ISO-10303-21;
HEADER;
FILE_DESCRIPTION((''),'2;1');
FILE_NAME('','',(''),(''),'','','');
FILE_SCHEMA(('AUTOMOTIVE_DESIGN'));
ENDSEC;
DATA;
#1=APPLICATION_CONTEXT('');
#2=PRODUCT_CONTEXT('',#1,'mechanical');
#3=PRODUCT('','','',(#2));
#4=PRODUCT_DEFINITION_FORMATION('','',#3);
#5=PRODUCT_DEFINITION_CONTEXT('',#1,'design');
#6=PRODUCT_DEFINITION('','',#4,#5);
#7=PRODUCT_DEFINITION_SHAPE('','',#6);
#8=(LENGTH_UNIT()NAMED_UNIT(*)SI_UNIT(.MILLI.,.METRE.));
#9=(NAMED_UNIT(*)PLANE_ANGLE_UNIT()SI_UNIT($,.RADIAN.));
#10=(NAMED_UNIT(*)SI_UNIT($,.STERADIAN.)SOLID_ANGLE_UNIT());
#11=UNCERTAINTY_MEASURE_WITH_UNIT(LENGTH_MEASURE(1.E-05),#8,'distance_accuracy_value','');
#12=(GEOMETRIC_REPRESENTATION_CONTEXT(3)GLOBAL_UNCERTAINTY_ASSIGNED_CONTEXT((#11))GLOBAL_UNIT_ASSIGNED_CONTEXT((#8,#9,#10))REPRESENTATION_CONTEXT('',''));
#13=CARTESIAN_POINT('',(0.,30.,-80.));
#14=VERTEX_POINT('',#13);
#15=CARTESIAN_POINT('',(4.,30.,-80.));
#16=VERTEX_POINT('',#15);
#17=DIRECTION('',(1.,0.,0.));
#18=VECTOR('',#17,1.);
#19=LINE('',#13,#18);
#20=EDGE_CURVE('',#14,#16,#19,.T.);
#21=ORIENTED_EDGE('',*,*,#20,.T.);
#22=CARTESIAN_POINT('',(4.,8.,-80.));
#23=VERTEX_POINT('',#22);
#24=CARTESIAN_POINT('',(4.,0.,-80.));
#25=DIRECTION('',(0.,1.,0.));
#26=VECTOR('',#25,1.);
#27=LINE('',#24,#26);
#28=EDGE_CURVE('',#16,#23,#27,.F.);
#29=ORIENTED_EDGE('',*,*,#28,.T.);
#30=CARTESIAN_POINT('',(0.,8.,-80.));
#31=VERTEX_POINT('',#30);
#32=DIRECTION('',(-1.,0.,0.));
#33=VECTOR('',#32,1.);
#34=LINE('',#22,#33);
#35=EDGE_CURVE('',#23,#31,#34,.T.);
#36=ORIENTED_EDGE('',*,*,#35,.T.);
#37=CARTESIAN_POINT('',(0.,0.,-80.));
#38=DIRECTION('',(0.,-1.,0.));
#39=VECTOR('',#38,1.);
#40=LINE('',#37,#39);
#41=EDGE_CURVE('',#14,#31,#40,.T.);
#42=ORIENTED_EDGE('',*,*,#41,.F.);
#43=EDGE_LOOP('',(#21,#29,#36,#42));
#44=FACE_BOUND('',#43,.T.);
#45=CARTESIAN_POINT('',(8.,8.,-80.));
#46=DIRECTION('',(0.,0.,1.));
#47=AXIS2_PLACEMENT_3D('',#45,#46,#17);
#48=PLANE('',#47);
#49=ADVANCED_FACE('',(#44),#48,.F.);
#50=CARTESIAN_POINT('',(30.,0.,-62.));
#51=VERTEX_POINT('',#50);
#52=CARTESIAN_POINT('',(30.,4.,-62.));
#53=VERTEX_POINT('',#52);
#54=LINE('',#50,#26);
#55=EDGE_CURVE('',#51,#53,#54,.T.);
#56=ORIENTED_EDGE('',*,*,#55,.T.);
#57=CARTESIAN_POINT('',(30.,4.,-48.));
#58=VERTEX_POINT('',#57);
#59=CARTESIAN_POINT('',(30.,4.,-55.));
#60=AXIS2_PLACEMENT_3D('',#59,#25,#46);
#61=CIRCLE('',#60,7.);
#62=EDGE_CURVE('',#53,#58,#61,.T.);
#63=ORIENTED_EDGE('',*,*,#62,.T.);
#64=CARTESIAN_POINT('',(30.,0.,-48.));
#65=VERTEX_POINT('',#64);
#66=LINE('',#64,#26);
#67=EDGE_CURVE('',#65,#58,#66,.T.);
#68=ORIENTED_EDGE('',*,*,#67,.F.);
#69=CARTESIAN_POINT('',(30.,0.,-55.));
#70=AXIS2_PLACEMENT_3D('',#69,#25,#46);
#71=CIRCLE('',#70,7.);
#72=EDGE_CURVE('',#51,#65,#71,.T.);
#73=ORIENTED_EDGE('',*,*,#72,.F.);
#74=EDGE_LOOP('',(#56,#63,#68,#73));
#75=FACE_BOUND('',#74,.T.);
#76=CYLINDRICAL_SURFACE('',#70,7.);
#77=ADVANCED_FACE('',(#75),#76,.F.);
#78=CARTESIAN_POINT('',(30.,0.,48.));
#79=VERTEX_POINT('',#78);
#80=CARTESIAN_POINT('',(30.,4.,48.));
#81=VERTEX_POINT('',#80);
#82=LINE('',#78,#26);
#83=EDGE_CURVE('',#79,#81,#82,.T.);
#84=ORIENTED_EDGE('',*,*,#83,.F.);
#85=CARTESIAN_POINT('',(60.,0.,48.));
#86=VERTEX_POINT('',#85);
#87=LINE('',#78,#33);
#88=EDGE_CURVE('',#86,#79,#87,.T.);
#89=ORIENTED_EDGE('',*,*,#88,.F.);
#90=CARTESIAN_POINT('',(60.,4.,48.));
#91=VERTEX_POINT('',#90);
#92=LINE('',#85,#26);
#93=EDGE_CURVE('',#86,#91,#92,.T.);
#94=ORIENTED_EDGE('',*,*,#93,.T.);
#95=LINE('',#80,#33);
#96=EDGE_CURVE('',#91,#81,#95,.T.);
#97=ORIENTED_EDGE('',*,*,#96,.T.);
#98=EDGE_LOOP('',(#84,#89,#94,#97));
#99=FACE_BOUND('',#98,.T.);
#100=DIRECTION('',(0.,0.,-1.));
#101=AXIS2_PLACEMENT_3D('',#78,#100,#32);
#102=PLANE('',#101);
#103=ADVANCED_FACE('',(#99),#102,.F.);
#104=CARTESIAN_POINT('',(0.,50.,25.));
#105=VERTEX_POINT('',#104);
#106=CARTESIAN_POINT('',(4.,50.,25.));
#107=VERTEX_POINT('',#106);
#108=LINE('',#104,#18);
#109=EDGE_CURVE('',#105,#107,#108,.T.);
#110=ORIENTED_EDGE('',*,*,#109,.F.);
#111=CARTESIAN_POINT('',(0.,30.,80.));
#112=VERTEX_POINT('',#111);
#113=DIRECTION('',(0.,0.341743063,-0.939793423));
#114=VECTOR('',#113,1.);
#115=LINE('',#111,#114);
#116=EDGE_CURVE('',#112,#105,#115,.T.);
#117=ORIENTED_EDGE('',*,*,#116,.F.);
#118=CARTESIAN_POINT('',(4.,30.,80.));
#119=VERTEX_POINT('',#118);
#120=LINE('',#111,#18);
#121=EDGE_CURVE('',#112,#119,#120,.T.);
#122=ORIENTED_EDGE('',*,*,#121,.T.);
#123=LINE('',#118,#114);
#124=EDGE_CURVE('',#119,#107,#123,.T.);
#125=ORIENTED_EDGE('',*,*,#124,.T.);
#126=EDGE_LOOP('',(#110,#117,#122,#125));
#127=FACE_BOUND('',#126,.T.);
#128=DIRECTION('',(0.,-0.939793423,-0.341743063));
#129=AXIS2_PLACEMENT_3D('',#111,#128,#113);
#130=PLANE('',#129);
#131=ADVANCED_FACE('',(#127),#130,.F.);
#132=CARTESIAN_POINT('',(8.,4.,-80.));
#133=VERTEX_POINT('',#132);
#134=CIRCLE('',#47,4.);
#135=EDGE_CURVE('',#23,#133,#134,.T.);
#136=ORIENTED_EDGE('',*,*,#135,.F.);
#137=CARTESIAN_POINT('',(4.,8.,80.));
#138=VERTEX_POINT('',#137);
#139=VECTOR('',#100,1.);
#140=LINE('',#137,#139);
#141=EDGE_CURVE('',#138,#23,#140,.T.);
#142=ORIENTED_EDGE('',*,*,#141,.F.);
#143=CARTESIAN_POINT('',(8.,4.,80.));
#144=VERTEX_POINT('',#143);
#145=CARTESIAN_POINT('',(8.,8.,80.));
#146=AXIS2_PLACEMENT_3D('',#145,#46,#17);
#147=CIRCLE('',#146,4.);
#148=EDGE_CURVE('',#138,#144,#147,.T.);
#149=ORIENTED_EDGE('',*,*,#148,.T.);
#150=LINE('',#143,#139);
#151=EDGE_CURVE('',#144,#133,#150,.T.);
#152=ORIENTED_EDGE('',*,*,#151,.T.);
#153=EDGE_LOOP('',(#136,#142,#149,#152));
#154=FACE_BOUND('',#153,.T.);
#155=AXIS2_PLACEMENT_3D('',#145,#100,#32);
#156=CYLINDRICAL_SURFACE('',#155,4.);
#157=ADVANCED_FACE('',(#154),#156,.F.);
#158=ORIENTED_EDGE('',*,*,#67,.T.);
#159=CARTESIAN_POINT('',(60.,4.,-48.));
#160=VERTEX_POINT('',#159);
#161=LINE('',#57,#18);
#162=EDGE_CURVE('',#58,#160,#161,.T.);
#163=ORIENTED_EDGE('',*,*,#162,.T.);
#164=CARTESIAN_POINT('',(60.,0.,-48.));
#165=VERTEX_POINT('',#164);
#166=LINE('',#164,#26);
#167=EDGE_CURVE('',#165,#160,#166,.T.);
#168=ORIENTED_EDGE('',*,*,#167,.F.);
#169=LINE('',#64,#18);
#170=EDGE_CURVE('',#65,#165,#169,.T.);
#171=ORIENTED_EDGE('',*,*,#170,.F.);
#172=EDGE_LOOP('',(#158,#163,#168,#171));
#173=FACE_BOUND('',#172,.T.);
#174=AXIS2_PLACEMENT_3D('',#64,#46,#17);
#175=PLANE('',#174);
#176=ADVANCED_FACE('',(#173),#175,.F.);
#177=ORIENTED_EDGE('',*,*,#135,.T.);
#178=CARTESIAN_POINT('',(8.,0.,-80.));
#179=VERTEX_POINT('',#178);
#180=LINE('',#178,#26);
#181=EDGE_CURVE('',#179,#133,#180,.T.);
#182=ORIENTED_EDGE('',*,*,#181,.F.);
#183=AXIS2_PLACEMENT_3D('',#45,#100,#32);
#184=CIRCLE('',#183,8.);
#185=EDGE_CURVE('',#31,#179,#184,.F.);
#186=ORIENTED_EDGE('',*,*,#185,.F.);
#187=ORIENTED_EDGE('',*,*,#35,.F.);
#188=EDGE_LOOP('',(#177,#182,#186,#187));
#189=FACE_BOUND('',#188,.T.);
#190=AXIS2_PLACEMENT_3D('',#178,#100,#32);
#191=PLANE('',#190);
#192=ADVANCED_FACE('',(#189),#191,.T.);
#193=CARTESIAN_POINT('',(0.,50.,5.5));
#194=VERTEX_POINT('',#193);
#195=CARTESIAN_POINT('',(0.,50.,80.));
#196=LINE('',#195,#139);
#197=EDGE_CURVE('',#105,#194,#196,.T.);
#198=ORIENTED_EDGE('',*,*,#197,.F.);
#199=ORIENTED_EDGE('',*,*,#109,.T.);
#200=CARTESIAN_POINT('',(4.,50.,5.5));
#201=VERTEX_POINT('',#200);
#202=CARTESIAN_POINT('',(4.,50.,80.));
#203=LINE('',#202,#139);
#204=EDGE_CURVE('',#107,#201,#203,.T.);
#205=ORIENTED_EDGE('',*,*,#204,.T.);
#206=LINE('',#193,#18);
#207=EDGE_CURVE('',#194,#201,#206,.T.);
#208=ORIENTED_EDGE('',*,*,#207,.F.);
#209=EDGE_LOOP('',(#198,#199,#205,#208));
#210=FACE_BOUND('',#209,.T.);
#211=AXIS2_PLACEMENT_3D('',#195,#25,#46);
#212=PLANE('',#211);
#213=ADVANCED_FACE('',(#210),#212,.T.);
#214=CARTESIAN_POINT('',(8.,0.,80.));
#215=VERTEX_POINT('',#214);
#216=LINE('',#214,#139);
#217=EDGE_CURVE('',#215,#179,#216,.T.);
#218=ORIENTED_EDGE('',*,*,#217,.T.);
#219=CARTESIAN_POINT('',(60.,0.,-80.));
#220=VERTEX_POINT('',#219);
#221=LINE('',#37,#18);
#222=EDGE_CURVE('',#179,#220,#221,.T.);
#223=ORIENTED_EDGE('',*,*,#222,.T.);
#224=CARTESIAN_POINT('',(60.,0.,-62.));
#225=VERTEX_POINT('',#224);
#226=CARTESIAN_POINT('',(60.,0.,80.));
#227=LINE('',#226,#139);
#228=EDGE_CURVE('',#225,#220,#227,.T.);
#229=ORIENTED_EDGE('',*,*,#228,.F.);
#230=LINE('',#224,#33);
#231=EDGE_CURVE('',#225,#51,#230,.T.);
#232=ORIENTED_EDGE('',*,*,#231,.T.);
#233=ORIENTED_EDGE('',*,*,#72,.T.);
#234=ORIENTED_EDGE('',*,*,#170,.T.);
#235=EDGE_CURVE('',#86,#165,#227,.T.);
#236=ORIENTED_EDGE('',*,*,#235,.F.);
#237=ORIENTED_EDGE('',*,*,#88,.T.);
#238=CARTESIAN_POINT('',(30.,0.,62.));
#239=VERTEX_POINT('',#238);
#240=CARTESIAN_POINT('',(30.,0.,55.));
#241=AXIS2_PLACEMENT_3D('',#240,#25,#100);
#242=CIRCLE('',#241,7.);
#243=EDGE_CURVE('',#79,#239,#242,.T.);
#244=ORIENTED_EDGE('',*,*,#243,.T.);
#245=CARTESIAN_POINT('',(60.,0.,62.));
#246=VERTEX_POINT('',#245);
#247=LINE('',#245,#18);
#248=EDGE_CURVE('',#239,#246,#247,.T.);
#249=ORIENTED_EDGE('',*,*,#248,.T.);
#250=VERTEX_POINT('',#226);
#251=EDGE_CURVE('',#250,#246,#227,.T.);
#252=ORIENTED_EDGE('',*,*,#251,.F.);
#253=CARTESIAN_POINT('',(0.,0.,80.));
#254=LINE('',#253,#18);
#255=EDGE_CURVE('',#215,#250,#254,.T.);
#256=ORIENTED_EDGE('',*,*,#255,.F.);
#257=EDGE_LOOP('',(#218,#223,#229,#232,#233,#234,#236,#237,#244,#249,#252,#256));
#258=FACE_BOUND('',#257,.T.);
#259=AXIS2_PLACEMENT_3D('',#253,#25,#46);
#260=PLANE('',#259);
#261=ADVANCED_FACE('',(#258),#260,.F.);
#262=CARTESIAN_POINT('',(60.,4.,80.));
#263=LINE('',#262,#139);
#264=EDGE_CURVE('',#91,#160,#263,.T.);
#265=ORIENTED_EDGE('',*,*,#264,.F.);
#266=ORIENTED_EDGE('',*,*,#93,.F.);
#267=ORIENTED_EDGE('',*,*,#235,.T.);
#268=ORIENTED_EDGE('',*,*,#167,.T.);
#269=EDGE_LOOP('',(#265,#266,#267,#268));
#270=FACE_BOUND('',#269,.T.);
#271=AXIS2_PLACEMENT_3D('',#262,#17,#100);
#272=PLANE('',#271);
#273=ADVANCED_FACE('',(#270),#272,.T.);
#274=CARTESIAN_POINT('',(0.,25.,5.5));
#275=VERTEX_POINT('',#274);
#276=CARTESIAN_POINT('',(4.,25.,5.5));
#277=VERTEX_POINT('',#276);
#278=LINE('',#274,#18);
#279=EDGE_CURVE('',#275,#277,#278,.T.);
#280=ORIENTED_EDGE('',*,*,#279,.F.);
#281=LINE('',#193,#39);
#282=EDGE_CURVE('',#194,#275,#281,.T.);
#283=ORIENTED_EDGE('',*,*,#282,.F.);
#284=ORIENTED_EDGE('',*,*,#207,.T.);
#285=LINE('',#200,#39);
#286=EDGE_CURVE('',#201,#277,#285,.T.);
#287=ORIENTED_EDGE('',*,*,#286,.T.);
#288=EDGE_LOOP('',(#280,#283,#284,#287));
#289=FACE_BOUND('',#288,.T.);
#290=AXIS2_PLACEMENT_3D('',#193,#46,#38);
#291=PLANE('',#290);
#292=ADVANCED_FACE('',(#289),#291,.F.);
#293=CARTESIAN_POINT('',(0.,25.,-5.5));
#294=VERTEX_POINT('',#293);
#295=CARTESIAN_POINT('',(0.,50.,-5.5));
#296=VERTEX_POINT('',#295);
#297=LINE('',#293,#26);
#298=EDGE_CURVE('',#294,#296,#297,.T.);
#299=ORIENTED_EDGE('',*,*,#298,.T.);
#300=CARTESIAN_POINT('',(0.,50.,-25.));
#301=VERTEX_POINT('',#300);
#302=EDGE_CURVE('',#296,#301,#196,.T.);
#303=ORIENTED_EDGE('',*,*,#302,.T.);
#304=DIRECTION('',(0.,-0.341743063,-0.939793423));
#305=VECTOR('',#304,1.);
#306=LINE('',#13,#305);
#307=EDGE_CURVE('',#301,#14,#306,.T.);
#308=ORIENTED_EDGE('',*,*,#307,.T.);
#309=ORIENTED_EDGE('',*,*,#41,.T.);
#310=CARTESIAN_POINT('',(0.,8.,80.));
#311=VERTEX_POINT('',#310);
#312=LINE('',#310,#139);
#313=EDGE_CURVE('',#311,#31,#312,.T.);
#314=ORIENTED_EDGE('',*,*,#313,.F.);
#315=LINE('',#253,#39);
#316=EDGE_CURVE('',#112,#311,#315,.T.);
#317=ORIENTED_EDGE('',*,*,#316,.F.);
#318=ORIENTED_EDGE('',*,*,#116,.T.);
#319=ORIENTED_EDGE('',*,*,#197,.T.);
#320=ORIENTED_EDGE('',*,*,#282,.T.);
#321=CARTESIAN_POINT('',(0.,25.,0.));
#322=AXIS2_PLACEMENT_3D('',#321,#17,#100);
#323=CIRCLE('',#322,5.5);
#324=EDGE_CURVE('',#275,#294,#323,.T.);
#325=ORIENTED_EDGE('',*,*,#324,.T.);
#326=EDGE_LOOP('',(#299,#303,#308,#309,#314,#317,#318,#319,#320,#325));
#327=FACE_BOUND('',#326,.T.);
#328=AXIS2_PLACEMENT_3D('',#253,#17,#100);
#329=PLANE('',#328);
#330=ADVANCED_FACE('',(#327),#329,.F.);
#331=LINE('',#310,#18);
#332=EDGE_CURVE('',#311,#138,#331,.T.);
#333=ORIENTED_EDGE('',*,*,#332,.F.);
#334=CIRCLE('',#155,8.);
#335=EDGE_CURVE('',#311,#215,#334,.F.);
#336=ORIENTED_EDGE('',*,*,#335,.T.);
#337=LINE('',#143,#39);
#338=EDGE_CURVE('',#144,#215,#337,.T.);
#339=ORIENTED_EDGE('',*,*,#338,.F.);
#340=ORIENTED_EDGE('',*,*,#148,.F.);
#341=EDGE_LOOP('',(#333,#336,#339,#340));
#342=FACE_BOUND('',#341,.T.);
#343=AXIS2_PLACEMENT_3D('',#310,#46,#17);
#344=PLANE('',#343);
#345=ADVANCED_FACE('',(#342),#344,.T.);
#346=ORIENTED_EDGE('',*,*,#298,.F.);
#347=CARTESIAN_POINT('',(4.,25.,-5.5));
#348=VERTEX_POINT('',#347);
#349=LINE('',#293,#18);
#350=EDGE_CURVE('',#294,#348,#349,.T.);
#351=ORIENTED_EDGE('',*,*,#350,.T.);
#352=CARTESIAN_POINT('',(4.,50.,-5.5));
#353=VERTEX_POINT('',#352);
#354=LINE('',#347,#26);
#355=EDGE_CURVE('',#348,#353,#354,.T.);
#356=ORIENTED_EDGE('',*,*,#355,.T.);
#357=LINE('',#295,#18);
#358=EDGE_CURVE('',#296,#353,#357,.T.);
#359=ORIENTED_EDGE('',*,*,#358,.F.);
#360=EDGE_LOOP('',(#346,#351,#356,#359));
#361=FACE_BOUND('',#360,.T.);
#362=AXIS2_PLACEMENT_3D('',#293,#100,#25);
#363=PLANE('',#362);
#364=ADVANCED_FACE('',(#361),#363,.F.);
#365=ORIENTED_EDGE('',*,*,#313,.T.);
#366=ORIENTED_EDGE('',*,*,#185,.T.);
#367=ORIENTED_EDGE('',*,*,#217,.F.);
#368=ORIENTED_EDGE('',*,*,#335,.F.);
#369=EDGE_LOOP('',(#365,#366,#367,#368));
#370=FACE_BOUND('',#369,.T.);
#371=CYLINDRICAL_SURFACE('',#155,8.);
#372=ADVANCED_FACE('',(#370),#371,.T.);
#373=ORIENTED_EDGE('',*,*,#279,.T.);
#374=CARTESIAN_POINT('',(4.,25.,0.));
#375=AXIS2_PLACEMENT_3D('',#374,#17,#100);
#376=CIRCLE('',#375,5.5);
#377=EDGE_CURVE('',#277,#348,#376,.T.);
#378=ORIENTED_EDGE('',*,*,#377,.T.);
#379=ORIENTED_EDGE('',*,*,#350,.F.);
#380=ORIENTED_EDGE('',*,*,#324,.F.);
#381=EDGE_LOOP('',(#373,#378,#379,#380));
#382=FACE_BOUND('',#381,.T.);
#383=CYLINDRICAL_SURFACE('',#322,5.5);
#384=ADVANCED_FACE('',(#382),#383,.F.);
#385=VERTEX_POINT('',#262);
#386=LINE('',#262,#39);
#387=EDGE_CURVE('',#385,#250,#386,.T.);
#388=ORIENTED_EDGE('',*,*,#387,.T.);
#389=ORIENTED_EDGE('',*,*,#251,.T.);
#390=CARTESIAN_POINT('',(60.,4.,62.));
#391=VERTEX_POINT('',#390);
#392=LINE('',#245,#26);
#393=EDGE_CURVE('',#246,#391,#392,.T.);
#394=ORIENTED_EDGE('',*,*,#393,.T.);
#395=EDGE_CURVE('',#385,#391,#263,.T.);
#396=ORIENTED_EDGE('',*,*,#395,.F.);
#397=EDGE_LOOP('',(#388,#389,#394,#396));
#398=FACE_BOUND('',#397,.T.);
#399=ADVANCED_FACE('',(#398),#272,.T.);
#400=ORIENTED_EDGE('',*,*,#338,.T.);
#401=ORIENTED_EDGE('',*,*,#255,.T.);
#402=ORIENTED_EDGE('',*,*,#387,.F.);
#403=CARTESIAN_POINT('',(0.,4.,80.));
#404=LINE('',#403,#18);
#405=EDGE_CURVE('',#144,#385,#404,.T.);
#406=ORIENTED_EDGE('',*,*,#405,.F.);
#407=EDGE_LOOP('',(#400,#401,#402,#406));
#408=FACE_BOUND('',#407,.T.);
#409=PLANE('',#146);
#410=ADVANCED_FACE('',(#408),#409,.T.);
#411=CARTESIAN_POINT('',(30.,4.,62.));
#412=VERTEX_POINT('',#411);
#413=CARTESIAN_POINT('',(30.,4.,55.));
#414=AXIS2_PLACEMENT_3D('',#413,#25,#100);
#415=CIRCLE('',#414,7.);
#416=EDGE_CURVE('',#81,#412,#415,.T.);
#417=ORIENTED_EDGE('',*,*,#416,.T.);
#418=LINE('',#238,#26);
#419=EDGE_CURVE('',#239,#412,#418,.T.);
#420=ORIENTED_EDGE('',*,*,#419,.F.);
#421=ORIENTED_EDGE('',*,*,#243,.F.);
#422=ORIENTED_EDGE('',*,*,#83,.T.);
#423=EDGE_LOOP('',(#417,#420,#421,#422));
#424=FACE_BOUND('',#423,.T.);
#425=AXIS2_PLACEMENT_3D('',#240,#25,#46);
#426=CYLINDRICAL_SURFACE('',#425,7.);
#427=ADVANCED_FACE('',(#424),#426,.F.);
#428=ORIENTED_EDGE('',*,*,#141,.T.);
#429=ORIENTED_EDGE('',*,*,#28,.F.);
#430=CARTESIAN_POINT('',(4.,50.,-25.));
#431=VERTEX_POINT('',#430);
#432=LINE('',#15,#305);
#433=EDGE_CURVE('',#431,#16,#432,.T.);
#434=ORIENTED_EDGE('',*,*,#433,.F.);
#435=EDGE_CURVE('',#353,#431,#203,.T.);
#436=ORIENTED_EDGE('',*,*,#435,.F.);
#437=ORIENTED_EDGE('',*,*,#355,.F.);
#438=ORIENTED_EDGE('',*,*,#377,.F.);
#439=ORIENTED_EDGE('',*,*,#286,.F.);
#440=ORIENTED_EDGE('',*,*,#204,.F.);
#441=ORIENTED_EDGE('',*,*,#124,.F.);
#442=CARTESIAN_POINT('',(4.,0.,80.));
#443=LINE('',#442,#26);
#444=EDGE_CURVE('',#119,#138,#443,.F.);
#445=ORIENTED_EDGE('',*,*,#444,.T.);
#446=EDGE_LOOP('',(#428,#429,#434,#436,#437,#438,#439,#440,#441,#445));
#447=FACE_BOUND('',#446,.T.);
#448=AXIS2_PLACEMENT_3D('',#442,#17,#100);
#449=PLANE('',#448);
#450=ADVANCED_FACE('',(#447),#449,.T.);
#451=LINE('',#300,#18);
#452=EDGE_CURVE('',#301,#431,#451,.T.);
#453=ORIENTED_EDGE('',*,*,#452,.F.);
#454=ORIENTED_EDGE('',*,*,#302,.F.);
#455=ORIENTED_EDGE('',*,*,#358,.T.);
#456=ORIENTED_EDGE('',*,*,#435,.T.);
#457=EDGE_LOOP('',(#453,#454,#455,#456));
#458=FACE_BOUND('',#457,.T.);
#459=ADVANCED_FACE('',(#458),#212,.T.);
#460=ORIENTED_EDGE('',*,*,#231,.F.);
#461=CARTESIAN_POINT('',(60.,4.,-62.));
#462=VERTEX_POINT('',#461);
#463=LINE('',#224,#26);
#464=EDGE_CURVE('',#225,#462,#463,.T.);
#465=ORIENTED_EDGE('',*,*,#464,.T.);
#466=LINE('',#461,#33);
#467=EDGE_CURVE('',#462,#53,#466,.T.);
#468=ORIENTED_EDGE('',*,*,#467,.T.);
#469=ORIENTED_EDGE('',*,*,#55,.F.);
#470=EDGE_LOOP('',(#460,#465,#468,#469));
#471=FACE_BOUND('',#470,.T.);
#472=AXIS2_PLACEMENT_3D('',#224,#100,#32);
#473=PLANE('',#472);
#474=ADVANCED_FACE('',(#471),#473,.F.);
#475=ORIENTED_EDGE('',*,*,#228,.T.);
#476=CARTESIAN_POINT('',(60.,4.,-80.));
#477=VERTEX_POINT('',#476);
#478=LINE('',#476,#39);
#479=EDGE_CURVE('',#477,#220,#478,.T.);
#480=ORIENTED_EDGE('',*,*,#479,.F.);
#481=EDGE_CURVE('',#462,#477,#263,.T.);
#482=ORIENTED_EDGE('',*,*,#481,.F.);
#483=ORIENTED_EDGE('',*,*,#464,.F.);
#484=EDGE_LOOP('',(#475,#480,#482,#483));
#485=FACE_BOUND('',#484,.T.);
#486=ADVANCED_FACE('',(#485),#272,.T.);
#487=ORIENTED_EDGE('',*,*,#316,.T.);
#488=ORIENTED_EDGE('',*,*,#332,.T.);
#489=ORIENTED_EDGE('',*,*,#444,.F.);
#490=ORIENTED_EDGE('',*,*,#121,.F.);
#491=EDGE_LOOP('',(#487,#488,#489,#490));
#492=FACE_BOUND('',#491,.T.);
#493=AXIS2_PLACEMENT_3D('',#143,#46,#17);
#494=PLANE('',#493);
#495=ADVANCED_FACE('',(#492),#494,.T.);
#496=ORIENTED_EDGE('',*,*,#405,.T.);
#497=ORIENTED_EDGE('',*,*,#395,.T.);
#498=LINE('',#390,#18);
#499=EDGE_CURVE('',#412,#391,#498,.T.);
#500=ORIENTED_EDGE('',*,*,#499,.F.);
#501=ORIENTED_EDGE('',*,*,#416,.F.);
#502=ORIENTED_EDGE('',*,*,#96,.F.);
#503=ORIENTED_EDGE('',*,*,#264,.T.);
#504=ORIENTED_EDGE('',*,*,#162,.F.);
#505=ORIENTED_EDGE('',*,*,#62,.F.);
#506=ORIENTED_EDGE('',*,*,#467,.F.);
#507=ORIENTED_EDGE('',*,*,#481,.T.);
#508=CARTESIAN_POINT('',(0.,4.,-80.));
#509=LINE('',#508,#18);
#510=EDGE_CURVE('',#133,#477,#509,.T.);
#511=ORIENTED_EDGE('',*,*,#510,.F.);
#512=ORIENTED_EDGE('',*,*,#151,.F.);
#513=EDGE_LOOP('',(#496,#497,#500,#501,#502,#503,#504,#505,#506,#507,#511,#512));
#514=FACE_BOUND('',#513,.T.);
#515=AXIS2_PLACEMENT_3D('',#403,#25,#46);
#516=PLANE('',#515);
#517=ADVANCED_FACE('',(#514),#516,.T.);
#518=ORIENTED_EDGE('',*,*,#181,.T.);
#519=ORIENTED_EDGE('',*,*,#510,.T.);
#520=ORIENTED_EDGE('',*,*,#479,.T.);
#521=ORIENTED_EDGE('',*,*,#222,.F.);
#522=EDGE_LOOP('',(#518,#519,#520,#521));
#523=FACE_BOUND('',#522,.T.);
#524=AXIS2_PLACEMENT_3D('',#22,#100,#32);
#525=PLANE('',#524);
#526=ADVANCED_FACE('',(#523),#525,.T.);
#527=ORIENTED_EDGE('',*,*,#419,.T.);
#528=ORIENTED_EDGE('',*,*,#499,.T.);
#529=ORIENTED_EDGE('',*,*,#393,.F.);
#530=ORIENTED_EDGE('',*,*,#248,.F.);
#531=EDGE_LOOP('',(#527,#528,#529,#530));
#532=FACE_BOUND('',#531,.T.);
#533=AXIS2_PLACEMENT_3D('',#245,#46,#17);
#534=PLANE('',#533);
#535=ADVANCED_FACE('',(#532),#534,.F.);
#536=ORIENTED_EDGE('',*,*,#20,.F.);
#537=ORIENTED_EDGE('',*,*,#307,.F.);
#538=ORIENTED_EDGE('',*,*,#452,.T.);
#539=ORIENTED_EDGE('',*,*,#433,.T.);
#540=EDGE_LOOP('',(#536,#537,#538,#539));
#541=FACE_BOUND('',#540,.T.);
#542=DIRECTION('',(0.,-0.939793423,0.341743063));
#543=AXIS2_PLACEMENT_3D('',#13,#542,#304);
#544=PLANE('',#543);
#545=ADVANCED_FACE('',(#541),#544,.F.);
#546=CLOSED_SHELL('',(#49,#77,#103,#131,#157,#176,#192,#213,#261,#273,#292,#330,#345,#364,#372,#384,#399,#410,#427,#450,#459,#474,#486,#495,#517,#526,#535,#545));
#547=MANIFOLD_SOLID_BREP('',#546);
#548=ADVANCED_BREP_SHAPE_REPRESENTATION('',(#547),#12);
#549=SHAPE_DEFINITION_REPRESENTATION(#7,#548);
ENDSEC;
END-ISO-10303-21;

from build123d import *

# Parameters (mm, degrees)
BASE_FLANGE3_DEPTH = 80
CUT_EXTRUDE1_DEPTH = 110.708705215
CUT_EXTRUDE2_DEPTH = 111.072703247


# Sheet-metal steps are written as plain solids
with BuildPart() as part:
    # Sketch1 → Base-Flange3 (new, symmetric)
    with BuildSketch(Plane.XY):
        with BuildLine():
            Line((60, 0), (8, 0))
            ThreePointArc((8, 0), (2.343145751, 2.343145751), (0, 8))
            Line((0, 8), (0, 50))
            Line((0, 50), (4, 50))
            Line((4, 50), (4, 8))
            ThreePointArc((4, 8), (5.171572875, 5.171572875), (8, 4))
            Line((8, 4), (60, 4))
            Line((60, 4), (60, 0))
        make_face()
    extrude(amount=BASE_FLANGE3_DEPTH, both=True)

    # Sketch14 → Cut-Extrude1 (cut, through all)
    with BuildSketch(Plane(origin=(4, 0, 0), x_dir=(0, 0, -1), z_dir=(1, 0, 0))):
        Polygon((-80, 30), (-25, 50), (-80, 50), align=None)
        Polygon((80, 30), (25, 50), (80, 50), align=None)
        with BuildLine():
            Line((-5.5, 50), (-5.5, 25))
            ThreePointArc((-5.5, 25), (0, 19.5), (5.5, 25))
            Line((5.5, 25), (5.5, 50))
            Line((5.5, 50), (-5.5, 50))
        make_face()
    extrude(amount=-CUT_EXTRUDE1_DEPTH, mode=Mode.SUBTRACT)

    # Sketch16 → Cut-Extrude2 (cut, through all)
    with BuildSketch(Plane(origin=(0, 4, 0), x_dir=(1, 0, 0), z_dir=(0, 1, 0))):
        with BuildLine():
            Line((60, 62), (30, 62))
            ThreePointArc((30, 62), (23, 55), (30, 48))
            Line((30, 48), (60, 48))
            Line((60, 48), (60, 62))
        make_face()
        with BuildLine():
            Line((60, -48), (60, -62))
            Line((60, -62), (30, -62))
            ThreePointArc((30, -62), (23, -55), (30, -48))
            Line((30, -48), (60, -48))
        make_face()
    extrude(amount=-CUT_EXTRUDE2_DEPTH, mode=Mode.SUBTRACT)


solid = part.part
